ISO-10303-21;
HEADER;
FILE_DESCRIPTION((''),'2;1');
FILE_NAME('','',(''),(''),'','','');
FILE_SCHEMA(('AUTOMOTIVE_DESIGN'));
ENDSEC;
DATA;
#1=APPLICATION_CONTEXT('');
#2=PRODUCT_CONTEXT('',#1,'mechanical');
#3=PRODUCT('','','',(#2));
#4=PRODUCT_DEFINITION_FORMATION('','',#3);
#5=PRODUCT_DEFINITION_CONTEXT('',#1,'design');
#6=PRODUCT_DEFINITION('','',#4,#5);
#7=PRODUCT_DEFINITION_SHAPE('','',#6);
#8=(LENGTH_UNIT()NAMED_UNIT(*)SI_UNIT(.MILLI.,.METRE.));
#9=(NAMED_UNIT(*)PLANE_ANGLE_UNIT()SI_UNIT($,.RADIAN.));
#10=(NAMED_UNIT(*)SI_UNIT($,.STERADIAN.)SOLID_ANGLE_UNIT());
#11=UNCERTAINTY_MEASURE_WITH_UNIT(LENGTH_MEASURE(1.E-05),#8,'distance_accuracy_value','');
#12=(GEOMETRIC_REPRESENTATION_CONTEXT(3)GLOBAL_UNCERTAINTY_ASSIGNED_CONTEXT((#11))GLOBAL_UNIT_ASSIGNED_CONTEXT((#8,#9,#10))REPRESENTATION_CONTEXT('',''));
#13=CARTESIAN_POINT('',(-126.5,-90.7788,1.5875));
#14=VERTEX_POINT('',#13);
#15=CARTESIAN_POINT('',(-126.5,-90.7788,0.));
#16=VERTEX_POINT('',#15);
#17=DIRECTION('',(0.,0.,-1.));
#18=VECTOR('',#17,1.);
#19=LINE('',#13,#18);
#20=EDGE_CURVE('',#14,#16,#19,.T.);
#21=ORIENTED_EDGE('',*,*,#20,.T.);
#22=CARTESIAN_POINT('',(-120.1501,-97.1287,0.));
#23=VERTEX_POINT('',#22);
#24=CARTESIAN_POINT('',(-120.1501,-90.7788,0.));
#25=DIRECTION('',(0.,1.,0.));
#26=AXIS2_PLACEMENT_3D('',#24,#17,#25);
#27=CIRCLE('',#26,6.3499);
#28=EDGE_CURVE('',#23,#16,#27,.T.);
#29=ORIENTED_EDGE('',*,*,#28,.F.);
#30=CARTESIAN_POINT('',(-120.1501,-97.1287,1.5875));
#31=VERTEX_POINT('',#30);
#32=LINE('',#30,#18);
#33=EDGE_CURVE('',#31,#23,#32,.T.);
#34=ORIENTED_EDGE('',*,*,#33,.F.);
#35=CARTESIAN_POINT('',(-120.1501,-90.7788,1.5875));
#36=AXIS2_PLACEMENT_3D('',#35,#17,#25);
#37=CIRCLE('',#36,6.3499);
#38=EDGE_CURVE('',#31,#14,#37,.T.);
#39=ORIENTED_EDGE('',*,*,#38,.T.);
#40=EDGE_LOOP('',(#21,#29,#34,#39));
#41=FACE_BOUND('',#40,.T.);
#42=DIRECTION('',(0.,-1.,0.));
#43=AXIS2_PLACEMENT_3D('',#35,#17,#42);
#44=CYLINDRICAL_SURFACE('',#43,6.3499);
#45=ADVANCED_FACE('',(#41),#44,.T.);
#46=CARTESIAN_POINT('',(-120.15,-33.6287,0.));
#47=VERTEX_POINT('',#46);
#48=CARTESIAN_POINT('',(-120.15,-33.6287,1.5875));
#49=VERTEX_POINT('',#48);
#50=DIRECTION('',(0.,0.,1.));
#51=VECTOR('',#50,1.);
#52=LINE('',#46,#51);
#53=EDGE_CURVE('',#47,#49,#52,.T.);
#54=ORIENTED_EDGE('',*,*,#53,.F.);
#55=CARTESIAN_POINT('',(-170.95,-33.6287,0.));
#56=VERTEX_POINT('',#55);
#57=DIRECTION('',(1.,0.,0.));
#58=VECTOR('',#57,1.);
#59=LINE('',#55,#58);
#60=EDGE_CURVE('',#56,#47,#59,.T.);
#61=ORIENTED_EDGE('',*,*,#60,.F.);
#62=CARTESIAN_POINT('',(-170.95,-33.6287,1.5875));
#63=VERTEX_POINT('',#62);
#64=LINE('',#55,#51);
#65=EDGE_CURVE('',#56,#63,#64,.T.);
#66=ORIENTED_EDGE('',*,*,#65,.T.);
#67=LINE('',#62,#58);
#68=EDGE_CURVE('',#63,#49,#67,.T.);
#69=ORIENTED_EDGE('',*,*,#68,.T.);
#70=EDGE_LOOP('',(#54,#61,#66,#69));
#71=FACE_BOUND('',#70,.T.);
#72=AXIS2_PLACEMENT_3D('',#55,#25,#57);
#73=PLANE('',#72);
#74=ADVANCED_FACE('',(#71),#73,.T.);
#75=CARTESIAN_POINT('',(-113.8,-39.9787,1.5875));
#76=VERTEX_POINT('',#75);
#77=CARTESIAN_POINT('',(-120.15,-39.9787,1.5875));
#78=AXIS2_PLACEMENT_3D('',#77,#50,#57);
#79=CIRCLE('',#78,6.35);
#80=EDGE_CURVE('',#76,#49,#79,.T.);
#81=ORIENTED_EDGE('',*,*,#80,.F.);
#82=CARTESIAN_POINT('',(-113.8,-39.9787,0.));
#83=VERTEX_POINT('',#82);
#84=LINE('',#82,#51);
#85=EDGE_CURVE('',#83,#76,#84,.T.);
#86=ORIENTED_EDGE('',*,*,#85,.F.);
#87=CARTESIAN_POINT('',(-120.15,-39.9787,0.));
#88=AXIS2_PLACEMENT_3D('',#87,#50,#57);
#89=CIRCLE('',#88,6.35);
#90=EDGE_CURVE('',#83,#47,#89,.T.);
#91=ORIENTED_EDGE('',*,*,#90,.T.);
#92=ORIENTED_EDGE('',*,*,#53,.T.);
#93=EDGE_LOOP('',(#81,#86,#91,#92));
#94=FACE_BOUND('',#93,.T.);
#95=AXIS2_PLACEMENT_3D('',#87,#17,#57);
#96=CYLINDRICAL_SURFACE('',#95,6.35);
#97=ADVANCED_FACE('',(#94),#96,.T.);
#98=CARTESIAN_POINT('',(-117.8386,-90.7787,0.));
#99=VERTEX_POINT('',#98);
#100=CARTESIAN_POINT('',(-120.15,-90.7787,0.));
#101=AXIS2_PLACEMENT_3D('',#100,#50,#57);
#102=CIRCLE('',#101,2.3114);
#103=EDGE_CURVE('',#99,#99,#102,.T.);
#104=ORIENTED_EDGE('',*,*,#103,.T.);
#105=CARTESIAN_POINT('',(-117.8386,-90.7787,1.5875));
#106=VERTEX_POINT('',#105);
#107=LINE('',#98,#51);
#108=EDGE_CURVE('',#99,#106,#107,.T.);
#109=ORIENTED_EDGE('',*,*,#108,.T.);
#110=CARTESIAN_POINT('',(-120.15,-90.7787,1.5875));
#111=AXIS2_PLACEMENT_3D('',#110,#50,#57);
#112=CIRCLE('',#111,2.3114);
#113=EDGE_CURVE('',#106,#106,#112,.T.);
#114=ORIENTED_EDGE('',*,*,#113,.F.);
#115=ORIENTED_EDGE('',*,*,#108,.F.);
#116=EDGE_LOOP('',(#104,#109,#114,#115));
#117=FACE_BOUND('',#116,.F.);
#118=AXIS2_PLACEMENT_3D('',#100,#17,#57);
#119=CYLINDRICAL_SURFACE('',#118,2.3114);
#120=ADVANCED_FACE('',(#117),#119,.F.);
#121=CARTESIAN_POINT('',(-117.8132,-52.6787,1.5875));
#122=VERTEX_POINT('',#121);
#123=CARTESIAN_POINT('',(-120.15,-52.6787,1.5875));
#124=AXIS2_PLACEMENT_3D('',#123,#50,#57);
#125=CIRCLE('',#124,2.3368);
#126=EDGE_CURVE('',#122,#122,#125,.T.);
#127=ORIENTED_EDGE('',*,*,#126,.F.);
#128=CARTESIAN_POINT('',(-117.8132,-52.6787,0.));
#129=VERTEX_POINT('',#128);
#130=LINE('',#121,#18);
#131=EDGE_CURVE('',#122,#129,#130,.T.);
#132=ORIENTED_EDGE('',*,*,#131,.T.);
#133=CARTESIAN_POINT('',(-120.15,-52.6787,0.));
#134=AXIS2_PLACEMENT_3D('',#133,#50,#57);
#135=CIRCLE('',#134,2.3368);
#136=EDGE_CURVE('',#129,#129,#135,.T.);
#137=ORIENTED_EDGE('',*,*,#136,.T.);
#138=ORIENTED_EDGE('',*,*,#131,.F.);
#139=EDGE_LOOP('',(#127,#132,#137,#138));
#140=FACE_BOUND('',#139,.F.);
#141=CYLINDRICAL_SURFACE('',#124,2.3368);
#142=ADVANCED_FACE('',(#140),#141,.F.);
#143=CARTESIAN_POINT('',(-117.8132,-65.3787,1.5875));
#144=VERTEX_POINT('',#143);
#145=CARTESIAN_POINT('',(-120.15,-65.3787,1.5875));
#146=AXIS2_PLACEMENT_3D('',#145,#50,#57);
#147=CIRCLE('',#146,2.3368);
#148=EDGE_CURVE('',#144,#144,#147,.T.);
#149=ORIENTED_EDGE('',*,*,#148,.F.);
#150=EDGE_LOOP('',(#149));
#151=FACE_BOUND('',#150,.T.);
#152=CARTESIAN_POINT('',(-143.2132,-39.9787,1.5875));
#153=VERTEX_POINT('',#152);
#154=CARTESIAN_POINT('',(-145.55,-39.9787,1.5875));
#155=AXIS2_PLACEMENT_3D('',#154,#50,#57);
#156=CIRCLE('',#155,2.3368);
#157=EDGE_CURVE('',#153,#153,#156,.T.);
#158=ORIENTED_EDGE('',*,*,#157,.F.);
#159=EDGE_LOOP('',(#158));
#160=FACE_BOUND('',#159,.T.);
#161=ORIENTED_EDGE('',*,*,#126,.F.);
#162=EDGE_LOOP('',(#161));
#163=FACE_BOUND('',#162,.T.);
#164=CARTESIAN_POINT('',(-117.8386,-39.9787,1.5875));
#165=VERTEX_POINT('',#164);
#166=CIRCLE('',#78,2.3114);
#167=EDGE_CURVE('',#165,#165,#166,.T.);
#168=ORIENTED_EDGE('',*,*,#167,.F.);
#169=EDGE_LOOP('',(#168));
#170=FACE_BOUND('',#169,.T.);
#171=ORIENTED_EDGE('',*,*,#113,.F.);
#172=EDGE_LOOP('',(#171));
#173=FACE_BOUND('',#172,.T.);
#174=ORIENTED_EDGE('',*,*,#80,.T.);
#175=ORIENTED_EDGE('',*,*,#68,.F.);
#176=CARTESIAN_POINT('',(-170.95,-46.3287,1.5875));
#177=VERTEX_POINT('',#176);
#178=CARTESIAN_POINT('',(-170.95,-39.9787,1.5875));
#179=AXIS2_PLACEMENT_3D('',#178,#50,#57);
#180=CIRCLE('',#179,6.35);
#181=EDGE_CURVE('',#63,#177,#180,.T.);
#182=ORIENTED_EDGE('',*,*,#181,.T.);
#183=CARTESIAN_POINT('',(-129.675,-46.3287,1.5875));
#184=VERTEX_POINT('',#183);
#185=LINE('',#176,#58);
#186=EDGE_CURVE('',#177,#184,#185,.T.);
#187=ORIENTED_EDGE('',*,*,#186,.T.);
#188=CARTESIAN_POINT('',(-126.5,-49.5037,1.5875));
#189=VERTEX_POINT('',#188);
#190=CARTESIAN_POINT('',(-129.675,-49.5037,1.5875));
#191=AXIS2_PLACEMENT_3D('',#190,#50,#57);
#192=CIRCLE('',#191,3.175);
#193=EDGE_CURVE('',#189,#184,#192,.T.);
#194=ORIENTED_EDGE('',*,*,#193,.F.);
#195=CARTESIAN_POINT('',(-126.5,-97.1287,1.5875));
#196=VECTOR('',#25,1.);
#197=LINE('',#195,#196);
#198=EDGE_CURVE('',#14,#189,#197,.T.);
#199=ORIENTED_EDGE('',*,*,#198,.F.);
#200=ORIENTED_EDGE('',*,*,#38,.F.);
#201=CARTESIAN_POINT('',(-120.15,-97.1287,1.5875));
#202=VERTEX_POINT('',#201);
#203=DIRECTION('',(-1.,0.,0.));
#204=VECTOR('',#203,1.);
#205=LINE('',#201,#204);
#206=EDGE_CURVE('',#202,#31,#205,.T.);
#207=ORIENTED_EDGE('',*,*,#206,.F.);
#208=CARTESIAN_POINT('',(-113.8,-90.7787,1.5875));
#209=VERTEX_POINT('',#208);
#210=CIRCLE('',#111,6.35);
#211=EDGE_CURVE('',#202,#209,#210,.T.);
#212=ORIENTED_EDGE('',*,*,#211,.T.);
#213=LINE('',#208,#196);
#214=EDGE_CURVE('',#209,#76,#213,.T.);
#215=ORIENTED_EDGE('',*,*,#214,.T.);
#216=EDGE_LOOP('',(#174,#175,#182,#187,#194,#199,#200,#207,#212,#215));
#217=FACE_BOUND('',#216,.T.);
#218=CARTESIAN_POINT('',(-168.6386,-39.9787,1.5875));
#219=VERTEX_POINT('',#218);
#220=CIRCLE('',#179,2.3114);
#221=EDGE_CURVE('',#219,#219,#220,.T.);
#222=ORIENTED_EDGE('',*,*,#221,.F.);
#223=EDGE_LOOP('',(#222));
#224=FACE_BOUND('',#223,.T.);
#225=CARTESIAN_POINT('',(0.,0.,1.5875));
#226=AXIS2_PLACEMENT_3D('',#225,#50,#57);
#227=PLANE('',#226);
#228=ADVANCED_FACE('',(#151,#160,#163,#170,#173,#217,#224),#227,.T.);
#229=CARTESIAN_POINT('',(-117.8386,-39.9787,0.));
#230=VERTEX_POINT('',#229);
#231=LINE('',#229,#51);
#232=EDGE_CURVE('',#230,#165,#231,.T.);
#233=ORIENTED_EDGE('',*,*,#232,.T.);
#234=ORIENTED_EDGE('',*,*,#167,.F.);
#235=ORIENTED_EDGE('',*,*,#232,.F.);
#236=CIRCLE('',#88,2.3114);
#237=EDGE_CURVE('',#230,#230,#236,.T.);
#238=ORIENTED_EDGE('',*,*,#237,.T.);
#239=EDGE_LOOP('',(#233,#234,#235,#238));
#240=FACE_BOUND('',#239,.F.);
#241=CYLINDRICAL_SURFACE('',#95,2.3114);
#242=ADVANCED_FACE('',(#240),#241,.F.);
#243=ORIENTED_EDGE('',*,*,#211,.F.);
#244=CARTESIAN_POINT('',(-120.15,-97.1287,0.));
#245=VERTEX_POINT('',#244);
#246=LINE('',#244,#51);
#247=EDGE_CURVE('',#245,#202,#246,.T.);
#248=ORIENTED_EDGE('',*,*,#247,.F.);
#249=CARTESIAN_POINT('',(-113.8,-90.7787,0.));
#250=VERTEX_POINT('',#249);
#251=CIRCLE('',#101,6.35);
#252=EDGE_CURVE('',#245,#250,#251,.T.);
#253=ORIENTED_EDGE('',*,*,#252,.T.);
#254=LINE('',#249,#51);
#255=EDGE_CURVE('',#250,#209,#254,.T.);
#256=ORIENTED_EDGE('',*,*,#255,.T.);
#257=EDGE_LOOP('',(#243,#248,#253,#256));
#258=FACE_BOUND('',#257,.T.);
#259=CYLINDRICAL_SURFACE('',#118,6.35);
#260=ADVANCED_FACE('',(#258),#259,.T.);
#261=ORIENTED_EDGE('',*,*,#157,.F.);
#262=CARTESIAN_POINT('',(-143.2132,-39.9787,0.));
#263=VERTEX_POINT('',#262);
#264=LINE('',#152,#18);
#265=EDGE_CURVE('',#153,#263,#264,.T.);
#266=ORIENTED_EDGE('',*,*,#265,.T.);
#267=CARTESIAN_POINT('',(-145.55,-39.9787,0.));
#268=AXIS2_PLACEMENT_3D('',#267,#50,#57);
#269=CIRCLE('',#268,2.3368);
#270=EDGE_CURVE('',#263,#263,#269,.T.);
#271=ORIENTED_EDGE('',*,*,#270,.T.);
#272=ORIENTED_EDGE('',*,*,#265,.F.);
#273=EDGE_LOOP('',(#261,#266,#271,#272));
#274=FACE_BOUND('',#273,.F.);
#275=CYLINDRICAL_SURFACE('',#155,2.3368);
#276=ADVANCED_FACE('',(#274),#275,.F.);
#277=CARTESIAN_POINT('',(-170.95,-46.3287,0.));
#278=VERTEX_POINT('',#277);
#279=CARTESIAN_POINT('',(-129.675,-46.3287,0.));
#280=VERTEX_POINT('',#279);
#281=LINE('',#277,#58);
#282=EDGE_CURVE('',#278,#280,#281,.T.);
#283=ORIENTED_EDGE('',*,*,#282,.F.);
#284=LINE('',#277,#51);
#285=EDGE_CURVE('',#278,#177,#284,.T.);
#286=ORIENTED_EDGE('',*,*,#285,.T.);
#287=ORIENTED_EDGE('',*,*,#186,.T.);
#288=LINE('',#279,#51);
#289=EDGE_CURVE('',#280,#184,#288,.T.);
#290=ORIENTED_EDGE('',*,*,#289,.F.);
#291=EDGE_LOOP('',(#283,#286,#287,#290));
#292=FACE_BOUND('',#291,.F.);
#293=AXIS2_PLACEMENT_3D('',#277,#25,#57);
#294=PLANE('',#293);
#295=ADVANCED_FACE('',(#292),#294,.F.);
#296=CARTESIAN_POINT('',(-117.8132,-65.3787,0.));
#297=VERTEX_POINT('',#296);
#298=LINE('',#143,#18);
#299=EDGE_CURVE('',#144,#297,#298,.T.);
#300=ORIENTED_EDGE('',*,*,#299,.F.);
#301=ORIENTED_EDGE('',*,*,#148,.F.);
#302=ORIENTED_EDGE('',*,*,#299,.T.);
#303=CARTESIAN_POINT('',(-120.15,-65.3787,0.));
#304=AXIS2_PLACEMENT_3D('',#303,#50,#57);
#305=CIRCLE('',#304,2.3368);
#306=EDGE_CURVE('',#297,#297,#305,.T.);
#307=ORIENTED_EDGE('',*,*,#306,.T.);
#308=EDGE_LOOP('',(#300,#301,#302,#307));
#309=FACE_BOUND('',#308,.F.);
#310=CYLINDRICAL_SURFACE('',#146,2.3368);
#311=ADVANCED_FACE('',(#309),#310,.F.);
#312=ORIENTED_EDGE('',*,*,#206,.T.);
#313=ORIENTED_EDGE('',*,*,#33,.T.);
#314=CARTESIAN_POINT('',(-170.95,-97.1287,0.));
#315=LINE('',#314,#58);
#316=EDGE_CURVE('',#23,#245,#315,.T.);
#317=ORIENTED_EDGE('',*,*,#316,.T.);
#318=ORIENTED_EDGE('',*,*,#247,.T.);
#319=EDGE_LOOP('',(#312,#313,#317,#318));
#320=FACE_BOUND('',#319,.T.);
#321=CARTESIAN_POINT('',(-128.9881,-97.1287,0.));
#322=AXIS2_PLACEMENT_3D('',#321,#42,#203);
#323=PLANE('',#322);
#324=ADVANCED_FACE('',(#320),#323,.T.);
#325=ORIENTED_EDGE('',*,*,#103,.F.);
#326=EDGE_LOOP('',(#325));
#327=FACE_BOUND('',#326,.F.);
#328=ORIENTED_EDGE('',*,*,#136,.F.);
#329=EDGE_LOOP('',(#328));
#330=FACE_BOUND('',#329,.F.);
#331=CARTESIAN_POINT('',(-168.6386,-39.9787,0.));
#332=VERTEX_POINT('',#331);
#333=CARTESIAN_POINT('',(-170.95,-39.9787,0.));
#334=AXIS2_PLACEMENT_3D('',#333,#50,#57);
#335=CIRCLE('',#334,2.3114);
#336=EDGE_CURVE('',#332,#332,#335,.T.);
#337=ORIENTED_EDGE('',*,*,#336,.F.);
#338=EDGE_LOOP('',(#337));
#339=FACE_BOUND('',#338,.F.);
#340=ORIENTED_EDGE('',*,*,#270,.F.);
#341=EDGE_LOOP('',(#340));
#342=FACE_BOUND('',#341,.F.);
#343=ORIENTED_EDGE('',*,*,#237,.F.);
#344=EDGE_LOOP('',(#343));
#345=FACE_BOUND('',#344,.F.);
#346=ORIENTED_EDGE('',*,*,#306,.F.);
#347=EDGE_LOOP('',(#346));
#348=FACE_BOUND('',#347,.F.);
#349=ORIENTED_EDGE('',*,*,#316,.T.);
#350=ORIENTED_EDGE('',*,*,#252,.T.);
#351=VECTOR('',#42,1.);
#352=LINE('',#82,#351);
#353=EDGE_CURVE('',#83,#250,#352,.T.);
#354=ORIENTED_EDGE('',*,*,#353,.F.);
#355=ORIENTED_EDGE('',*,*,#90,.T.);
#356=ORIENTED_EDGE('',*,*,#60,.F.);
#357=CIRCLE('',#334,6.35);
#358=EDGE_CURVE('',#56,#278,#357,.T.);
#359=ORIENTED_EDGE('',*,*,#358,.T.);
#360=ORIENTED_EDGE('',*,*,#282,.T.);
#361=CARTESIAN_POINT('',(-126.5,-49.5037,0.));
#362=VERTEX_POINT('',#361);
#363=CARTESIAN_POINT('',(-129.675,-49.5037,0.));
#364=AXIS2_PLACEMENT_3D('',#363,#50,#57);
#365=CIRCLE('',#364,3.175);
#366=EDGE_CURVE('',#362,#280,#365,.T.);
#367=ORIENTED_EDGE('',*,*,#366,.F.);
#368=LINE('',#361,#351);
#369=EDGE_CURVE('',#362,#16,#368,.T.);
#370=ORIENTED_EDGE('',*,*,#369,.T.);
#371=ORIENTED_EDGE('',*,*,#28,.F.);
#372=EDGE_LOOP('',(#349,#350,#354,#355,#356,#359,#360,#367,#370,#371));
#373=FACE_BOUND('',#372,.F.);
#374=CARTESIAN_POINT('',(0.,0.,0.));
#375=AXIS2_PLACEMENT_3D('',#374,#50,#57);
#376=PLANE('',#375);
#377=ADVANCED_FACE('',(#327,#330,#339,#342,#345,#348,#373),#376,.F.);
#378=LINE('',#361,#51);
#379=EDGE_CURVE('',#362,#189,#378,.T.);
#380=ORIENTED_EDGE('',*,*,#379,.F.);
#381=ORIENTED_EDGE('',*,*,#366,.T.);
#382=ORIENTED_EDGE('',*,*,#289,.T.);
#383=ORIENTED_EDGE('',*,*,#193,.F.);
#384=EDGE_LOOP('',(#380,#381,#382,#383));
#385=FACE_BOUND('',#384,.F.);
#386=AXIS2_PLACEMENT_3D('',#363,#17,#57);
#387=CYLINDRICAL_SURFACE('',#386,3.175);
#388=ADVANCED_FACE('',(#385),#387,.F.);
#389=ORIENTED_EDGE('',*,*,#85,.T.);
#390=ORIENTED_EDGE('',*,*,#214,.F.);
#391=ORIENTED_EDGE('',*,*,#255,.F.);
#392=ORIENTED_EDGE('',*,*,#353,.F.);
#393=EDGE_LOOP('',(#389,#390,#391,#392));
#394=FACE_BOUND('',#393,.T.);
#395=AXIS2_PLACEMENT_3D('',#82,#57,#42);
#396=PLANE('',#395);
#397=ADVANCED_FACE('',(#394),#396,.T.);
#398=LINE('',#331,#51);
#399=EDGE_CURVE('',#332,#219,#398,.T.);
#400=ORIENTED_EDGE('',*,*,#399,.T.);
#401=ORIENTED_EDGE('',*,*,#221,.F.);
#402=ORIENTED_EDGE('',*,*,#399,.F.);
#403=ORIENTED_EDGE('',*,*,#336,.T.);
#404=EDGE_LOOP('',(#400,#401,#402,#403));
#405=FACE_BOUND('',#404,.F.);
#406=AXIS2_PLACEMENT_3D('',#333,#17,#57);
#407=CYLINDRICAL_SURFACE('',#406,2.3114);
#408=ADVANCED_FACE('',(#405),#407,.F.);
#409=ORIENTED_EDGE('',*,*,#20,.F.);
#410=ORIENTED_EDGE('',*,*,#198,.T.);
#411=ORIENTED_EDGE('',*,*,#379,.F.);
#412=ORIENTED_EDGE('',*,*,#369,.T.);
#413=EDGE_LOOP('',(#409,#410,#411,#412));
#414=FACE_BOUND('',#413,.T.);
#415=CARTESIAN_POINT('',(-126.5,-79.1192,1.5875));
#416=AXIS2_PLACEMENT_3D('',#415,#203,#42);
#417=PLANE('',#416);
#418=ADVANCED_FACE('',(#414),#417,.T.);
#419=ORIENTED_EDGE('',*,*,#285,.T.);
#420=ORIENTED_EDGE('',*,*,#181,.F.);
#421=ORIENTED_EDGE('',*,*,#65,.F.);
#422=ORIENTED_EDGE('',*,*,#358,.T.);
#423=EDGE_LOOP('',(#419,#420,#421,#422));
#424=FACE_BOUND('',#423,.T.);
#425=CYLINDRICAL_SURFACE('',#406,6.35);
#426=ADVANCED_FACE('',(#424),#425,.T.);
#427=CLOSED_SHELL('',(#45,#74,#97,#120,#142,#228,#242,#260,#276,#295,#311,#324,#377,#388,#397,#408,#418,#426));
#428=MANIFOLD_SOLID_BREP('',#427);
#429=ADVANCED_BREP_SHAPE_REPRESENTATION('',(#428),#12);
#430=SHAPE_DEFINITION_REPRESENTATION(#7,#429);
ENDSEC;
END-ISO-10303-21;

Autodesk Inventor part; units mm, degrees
ref_plane "YZ Plane" through (0, 0, 0) normal (1, 0, 0) x (0, 1, 0)
ref_plane "XZ Plane" through (0, 0, 0) normal (0, 1, 0) x (-1, 0, 0)
ref_plane "XY Plane" through (0, 0, 0) normal (0, 0, 1) x (1, 0, 0)
sketch "Sketch1" plane through (0, 0, 0) normal (0, 0, 1) x (1, 0, 0)
  line L0 (-127.5242, -32.3587) -> (-188.9758, -32.3587) projected
  line L1 (-128.9881, -97.1287) -> (-187.5119, -97.1287) projected
  line L2 (-113.8, -97.1287) -> (-113.8, -85.5717) projected
  circle A0 centre (-120.15, -39.9787) radius 2.3114 projected
  circle A1 centre (-120.15, -90.7787) radius 2.3114 projected
  circle A2 centre (-170.95, -90.7787) radius 2.3114 projected
  circle A3 centre (-170.95, -39.9787) radius 2.3114 projected
  circle A4 centre (-158.25, -39.9787) radius 2.3114 projected
  circle A5 centre (-158.25, -90.7787) radius 2.3114 projected
  circle A6 centre (-120.15, -39.9787) radius 6.35
  circle A7 centre (-170.95, -39.9787) radius 6.35
  circle A8 centre (-170.95, -90.7787) radius 6.35
  circle A9 centre (-120.15, -90.7787) radius 6.35
  line L3 (-170.95, -33.6287) -> (-120.15, -33.6287)
  line L4 (-113.8, -39.9787) -> (-113.8, -90.7787)
  line L5 (-120.15, -97.1287) -> (-170.95, -97.1287)
  line L6 (-170.95, -46.3287) -> (-129.675, -46.3287)
  line L7 (-126.5, -49.5037) -> (-126.5, -81.2537)
  line L8 (-129.675, -84.4287) -> (-170.95, -84.4287)
  arc A10 (-126.5, -49.5037) -> (-129.675, -46.3287) centre (-129.675, -49.5037) ccw
  arc A11 (-129.675, -84.4287) -> (-126.5, -81.2537) centre (-129.675, -81.2537) ccw
  circle A12 centre (-170.95, -39.9787) radius 2.3114
  circle A13 centre (-120.15, -39.9787) radius 2.3114
  circle A14 centre (-120.15, -90.7787) radius 2.3114
  circle A15 centre (-170.95, -90.7787) radius 2.3114
  circle A16 centre (-158.25, -90.7787) radius 2.3114
  circle A17 centre (-158.25, -39.9787) radius 2.3114
  point P0 (0, 0)
  dimension "d6" = 12.7
  dimension "d7" = 12.7
  dimension "d8" = 12.7
  dimension "d9" = 12.7
  dimension "d10" = 3.175
extrude "Extrusion1" add sketch "Sketch1" along normal blind 1.5875
sketch "Sketch2" plane through (0, 0, 1.5875) normal (0, 0, 1) x (1, 0, 0)
  circle A0 centre (-158.25, -39.9787) radius 2.3114 projected
  circle A1 centre (-158.25, -39.9787) radius 2.3114
  circle A2 centre (-158.25, -90.7787) radius 2.3114 projected
  circle A3 centre (-158.25, -90.7787) radius 2.3114
  circle A4 centre (-145.55, -90.7787) radius 2.3368
  circle A5 centre (-170.95, -90.7787) radius 2.3114 projected
  circle A6 centre (-145.55, -39.9787) radius 2.3368
  circle A7 centre (-120.15, -65.3787) radius 2.3368
  circle A8 centre (-120.15, -39.9787) radius 2.3114 projected
  line L0 (-113.8, -90.7787) -> (-113.8, -39.9787) projected
  circle A9 centre (-170.95, -39.9787) radius 2.3114 projected
  circle A10 centre (-120.15, -90.7787) radius 2.3114 projected
  point P0 (0, 0)
  dimension "d13" = 4.6736
  dimension "d14" = 25.4
  dimension "d15" = 4.6736
  dimension "d16" = 4.6736
  dimension "d17" = 25.4
  dimension "d18" = 6.35
  dimension "d23" = 25.4
  dimension "d24" = 25.4
  dimension "d25" = 25.4
extrude "Extrusion2" cut sketch "Sketch2" against normal blind 25.4 contours A4 | A6 | A7
extrude "Extrusion3" add sketch "Sketch2" against normal up to surface (1.5875 mm away) contours A0 | A2
sketch "Sketch3" plane through (0, 0, 1.5875) normal (0, 0, 1) x (1, 0, 0)
  line L0 (-126.5, -49.5037) -> (-126.5, -81.2537) projected
  line L1 (-126.5, -81.2537) -> (-126.5, -90.7787)
  line L2 (-170.95, -97.1287) -> (-120.15, -97.1287) projected
  circle A0 centre (-145.55, -90.7787) radius 2.3368 projected
  circle A1 centre (-145.55, -39.9787) radius 2.3368 projected
  circle A2 centre (-120.15, -65.3787) radius 2.3368 projected
  line L3 (-113.8, -90.7787) -> (-113.8, -39.9787) projected
  arc A3 (-113.8, -39.9787) -> (-120.15, -33.6287) centre (-120.15, -39.9787) ccw projected
  line L4 (-120.15, -33.6287) -> (-170.95, -33.6287) projected
  arc A4 (-170.95, -33.6287) -> (-170.95, -46.3287) centre (-170.95, -39.9787) ccw projected
  line L5 (-170.95, -46.3287) -> (-129.675, -46.3287) projected
  arc A5 (-126.5, -49.5037) -> (-129.675, -46.3287) centre (-129.675, -49.5037) ccw projected
  line L6 (-126.5, -49.5037) -> (-126.5, -81.2537) projected
  arc A6 (-129.675, -84.4287) -> (-126.5, -81.2537) centre (-129.675, -81.2537) ccw projected
  line L7 (-129.675, -84.4287) -> (-170.95, -84.4287) projected
  arc A7 (-170.95, -84.4287) -> (-170.95, -97.1287) centre (-170.95, -90.7787) ccw projected
  line L8 (-170.95, -97.1287) -> (-120.15, -97.1287) projected
  arc A8 (-120.15, -97.1287) -> (-113.8, -90.7787) centre (-120.15, -90.7787) ccw projected
  circle A9 centre (-170.95, -39.9787) radius 2.3114 projected
  circle A10 centre (-120.15, -39.9787) radius 2.3114 projected
  circle A11 centre (-170.95, -90.7787) radius 2.3114 projected
  circle A12 centre (-120.15, -90.7787) radius 2.3114 projected
  arc A13 (-120.15, -97.1287) -> (-113.8, -90.7787) centre (-120.15, -90.7787) ccw projected
  line L9 (-120.15, -97.1287) -> (-120.15, -97.1287)
  arc A14 (-126.5, -90.7787) -> (-120.15, -97.1287) centre (-120.15, -90.7787) ccw
  circle A15 centre (-120.15, -52.6787) radius 2.3368
  line L10 (-126.5, -79.1192) -> (-182.8014, -79.1192)
  line L11 (-182.8014, -79.1192) -> (-182.8014, -103.4813)
  line L12 (-182.8014, -103.4813) -> (-126.5, -103.4813)
  line L13 (-126.5, -103.4813) -> (-126.5, -79.1192)
  line L14 (-126.5, -97.1287) -> (-120.15, -97.1287)
  point P0 (0, 0)
  dimension "d26" = 6.35
  dimension "d27" = 4.6736
  dimension "d28" = 38.1
  dimension "d29" = 6.35
extrude "Cut1" cut sketch "Sketch3" against normal blind 1.5875 contours L0 A6 L7 A7 L2 L13 L12 L11 L10 | L1 L13 L2 A7 L7 A6
sketch "Sketch4" plane through (0, 0, 1.5875) normal (0, 0, 1) x (1, 0, 0)
  circle A0 centre (-120.15, -52.6787) radius 2.3368
  line L0 (-113.8, -90.7787) -> (-113.8, -39.9787) projected
  circle A1 centre (-120.15, -90.7787) radius 2.3114 projected
  point P0 (0, 0)
  dimension "d33" = 4.6736
  dimension "d34" = 6.35
  dimension "d35" = 38.1
extrude "Cut2" cut sketch "Sketch4" against normal blind 1.5875 contours A0
fillet "Corner Round1" radius 6.35 1 edges at (-126.5, -97.1287, 0.7937)
equation "\"d31\" = Thickness"
equation "\"d36\" = Thickness"
equation "\"BendRadius\" = Thickness"
equation "\"BendReliefWidth\" = Thickness"
equation "\"BendReliefDepth\" = 0.5 * Thickness"
equation "\"CornerReliefSize\" = 4 * Thickness"
equation "\"MinimumRemnant\" = 2 * Thickness"
equation "\"TransitionRadius\" = BendRadius"
equation "\"JacobiRadiusSize\" = BendRadius"
equation "\"GapSize\" = Thickness"
equation "\"d30\" = Thickness"
equation "\"Thickness\" = 1.5875"
properties part number "frontgusset" material "Polycarbonate, Clear"
